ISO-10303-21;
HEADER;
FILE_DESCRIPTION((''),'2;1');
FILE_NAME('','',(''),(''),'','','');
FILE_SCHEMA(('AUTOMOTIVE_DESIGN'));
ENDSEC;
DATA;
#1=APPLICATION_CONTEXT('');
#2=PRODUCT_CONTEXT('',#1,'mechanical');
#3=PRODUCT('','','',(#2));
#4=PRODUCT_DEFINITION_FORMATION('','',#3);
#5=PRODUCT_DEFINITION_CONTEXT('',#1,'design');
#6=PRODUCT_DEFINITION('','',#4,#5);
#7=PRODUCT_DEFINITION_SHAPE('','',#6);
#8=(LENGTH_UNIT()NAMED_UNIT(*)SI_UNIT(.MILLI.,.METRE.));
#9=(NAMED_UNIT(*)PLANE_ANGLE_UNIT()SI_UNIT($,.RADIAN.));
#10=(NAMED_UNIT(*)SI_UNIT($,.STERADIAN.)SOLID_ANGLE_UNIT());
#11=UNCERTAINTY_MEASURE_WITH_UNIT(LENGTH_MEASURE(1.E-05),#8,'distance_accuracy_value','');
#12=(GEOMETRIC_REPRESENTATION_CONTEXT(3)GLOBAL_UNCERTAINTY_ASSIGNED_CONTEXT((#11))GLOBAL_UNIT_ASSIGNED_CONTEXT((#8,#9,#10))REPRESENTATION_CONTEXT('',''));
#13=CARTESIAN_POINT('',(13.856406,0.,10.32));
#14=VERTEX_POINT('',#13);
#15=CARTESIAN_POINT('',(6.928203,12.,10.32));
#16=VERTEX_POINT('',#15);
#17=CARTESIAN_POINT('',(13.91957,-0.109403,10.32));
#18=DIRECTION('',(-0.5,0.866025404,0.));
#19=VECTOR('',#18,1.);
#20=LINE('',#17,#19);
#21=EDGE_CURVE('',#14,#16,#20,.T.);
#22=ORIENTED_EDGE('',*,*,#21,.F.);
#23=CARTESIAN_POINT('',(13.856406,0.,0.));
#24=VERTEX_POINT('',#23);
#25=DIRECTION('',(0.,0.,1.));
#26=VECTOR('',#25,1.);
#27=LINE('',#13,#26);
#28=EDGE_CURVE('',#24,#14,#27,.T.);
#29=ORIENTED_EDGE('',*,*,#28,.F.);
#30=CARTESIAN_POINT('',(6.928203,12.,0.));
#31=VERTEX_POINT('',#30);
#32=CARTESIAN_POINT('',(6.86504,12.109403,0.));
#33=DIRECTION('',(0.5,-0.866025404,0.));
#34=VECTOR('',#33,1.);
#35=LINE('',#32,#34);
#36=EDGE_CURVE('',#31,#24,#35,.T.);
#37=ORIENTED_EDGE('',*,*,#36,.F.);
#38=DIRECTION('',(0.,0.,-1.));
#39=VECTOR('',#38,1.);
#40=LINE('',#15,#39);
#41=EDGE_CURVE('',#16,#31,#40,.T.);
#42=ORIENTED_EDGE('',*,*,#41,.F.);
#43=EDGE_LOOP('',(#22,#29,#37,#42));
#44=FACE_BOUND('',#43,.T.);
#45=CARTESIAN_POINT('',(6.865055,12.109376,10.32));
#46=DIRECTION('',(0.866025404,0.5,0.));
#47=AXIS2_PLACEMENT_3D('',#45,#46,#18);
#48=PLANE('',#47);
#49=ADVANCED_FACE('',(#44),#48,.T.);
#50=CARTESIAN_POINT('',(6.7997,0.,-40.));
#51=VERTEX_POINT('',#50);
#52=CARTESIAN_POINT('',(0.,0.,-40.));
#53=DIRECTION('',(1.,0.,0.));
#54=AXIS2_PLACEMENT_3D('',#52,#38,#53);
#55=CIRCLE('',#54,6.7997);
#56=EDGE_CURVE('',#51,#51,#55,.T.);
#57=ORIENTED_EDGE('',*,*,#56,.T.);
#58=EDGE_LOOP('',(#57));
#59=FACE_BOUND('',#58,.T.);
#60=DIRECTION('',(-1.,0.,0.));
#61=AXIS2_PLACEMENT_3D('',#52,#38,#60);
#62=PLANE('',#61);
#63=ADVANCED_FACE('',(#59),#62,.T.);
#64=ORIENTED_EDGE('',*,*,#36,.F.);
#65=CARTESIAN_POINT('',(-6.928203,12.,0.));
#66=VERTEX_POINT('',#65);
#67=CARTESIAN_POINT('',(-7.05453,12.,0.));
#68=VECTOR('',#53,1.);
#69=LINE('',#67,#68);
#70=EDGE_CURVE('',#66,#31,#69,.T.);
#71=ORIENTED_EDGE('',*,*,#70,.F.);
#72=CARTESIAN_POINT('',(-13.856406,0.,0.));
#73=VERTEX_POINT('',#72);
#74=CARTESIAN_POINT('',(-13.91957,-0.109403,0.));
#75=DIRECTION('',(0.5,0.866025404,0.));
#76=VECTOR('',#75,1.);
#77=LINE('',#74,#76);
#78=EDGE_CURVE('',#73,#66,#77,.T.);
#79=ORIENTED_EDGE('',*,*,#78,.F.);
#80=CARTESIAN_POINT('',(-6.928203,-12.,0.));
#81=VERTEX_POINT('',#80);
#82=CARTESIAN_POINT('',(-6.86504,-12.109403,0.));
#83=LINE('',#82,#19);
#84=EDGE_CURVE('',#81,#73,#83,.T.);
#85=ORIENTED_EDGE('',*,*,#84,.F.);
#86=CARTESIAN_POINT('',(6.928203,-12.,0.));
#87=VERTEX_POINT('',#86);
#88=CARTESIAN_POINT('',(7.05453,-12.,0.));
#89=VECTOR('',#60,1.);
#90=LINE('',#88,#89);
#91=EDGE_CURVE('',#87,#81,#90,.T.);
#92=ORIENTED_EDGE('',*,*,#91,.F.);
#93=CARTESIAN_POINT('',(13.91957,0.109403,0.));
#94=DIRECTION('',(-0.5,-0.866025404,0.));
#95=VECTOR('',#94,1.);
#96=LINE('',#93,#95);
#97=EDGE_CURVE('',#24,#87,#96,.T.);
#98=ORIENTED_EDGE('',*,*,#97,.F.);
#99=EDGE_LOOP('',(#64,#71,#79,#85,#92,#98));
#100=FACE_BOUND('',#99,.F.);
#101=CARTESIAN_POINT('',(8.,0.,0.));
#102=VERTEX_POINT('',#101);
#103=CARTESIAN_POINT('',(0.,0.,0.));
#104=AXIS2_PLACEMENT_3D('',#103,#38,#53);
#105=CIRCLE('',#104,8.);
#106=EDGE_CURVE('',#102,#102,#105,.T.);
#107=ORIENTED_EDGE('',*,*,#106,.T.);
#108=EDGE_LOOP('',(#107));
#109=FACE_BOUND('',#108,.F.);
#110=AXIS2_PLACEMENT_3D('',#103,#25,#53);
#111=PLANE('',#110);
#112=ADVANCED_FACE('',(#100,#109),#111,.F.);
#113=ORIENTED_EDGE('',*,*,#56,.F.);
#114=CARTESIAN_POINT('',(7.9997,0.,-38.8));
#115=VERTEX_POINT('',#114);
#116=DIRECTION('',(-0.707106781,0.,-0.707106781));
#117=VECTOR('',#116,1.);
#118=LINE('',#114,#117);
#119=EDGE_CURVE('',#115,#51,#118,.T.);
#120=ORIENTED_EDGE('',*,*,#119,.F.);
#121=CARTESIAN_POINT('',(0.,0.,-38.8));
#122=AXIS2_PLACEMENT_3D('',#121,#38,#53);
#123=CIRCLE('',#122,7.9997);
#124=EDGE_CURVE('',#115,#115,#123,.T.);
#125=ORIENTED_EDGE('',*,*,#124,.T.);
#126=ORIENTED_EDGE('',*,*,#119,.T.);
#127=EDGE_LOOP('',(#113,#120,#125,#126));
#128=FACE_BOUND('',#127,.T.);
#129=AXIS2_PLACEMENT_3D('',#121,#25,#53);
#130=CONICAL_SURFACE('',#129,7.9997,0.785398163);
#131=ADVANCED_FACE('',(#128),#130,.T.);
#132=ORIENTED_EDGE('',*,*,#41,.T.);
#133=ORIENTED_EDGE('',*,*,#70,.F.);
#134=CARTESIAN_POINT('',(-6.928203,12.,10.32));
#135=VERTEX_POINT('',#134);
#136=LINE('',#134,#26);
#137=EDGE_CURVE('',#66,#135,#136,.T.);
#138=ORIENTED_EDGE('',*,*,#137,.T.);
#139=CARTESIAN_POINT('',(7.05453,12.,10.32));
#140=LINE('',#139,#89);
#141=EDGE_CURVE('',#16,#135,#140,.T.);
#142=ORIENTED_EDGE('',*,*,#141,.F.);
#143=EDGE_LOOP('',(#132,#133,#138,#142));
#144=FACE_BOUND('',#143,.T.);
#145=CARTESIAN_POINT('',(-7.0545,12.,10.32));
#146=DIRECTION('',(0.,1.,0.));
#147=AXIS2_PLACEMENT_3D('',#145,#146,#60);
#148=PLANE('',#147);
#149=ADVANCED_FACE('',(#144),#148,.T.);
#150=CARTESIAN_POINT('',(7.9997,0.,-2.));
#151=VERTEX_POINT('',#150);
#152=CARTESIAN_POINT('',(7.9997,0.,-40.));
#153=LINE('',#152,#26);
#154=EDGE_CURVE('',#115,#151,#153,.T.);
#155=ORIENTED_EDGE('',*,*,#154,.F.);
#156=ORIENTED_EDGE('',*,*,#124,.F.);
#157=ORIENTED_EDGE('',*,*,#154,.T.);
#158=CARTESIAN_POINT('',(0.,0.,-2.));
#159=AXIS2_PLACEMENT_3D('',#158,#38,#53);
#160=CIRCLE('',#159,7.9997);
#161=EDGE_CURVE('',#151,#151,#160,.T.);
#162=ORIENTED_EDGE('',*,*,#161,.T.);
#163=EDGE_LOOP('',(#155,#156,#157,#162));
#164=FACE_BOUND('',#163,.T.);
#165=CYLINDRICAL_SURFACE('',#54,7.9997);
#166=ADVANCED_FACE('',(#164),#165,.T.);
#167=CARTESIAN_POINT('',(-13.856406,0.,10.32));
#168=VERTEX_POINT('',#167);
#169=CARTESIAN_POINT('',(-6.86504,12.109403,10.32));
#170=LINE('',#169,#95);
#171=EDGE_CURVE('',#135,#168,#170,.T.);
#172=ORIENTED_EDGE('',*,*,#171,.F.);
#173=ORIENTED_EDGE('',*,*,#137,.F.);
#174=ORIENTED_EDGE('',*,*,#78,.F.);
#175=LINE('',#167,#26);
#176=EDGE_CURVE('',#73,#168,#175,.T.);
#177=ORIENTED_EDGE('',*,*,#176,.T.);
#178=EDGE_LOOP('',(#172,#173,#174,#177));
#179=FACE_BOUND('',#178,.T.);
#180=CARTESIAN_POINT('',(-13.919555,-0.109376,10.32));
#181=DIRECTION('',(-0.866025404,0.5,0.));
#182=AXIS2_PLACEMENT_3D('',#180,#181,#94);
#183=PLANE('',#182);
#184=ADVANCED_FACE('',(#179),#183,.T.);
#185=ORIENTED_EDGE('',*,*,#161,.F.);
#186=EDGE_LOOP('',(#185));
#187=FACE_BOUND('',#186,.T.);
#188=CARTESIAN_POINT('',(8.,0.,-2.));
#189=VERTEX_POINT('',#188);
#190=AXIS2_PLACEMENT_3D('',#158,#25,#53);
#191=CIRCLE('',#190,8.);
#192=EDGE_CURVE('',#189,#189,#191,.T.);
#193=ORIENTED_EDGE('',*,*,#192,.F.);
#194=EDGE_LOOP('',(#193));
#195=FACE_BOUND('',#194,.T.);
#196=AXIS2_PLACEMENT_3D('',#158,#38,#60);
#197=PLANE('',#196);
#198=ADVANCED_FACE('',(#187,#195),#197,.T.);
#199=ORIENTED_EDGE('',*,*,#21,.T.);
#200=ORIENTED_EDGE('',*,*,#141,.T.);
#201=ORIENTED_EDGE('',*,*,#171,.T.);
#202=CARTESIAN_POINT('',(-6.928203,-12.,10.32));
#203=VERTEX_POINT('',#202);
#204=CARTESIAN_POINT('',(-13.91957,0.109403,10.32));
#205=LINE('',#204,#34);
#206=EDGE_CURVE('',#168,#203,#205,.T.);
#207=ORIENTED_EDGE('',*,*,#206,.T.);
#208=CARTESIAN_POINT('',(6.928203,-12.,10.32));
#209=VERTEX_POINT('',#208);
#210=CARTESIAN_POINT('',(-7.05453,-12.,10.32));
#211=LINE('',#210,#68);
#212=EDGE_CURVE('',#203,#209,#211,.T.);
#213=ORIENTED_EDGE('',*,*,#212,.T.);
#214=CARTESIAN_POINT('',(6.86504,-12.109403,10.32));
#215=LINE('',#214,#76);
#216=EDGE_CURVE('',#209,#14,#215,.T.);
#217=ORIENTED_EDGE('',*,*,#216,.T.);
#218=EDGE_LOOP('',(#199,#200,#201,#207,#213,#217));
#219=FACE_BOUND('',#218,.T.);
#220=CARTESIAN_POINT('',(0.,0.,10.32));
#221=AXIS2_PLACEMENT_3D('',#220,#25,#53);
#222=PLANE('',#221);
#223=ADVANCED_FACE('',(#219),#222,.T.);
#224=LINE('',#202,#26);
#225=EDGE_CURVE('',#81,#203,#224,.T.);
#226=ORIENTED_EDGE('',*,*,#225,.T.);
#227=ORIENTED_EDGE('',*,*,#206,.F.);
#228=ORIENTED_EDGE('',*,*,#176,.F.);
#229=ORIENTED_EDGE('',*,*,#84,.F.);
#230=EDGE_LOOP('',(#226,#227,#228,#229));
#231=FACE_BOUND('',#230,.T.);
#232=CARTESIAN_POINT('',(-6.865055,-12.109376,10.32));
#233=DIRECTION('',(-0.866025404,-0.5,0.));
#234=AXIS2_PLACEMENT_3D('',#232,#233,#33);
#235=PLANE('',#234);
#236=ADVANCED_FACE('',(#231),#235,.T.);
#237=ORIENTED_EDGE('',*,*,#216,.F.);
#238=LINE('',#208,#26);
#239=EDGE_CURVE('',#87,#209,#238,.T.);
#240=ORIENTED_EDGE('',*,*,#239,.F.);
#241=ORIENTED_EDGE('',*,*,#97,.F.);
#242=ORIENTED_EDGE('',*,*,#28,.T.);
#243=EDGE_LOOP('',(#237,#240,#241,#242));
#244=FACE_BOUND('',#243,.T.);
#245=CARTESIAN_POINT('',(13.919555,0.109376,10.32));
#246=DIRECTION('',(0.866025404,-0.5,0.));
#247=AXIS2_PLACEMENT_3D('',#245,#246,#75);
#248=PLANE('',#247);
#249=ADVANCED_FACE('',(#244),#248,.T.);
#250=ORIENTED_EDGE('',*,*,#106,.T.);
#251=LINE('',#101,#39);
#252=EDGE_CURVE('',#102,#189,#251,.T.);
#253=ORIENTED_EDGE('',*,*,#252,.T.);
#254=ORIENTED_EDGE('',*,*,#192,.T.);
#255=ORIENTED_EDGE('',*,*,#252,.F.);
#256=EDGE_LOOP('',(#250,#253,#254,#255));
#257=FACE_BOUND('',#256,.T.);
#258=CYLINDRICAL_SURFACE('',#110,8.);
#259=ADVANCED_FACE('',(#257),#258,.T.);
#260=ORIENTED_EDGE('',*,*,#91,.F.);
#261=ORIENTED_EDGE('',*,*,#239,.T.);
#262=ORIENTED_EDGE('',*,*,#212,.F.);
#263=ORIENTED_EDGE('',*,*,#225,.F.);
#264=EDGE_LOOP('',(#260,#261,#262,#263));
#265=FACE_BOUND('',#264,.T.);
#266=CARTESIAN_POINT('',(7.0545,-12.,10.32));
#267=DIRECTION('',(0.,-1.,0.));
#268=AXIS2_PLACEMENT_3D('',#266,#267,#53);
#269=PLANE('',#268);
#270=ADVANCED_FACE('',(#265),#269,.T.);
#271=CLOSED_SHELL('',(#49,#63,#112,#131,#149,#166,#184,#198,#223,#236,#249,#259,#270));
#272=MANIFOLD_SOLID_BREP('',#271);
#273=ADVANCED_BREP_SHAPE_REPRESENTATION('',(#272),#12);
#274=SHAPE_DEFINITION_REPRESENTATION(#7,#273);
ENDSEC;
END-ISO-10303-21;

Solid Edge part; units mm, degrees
sketch "Sketch1" plane through (0, 0, 0) normal (0, 0, 1) x (1, 0, 0)
  circle A0 centre (0, 0) radius 13.92
  dimension "D1" = 27.84
extrude "Protrusion1" add sketch "Sketch1" along normal blind 10.32
sketch "Sketch2" plane through (0, 0, 0) normal (0, 0, -1) x (1, 0, 0)
  circle A0 centre (0, 0) radius 8
extrude "Protrusion2" add sketch "Sketch2" along normal blind 40
sketch "Sketch3" plane through (0, 0, -40) normal (0, 0, -1) x (1, 0, 0)
  circle A0 centre (0, 0) radius 7.9997
extrude "Cutout1" cut sketch "Sketch3" against normal blind 38 flip side to cut
chamfer "Chamfer_1" distance 1.2 angle 45 1 edges at (-7.9997, 0, -40)
sketch "Sketch4" plane through (0, 0, 10.32) normal (0, 0, 1) x (1, 0, 0)
  line L0 (-7.0545, 12) -> (7.0545, 12)
  dimension "D1" = 24
extrude "Cutout2" cut sketch "Sketch4" against normal up to next material side at (0, 12.05, 10.32)
pattern_circular "Pattern1" count 6 over 360 about axis through (0, 0, 10.32) along (0, 0, 1) of "Cutout2"
properties part number "24109064"
